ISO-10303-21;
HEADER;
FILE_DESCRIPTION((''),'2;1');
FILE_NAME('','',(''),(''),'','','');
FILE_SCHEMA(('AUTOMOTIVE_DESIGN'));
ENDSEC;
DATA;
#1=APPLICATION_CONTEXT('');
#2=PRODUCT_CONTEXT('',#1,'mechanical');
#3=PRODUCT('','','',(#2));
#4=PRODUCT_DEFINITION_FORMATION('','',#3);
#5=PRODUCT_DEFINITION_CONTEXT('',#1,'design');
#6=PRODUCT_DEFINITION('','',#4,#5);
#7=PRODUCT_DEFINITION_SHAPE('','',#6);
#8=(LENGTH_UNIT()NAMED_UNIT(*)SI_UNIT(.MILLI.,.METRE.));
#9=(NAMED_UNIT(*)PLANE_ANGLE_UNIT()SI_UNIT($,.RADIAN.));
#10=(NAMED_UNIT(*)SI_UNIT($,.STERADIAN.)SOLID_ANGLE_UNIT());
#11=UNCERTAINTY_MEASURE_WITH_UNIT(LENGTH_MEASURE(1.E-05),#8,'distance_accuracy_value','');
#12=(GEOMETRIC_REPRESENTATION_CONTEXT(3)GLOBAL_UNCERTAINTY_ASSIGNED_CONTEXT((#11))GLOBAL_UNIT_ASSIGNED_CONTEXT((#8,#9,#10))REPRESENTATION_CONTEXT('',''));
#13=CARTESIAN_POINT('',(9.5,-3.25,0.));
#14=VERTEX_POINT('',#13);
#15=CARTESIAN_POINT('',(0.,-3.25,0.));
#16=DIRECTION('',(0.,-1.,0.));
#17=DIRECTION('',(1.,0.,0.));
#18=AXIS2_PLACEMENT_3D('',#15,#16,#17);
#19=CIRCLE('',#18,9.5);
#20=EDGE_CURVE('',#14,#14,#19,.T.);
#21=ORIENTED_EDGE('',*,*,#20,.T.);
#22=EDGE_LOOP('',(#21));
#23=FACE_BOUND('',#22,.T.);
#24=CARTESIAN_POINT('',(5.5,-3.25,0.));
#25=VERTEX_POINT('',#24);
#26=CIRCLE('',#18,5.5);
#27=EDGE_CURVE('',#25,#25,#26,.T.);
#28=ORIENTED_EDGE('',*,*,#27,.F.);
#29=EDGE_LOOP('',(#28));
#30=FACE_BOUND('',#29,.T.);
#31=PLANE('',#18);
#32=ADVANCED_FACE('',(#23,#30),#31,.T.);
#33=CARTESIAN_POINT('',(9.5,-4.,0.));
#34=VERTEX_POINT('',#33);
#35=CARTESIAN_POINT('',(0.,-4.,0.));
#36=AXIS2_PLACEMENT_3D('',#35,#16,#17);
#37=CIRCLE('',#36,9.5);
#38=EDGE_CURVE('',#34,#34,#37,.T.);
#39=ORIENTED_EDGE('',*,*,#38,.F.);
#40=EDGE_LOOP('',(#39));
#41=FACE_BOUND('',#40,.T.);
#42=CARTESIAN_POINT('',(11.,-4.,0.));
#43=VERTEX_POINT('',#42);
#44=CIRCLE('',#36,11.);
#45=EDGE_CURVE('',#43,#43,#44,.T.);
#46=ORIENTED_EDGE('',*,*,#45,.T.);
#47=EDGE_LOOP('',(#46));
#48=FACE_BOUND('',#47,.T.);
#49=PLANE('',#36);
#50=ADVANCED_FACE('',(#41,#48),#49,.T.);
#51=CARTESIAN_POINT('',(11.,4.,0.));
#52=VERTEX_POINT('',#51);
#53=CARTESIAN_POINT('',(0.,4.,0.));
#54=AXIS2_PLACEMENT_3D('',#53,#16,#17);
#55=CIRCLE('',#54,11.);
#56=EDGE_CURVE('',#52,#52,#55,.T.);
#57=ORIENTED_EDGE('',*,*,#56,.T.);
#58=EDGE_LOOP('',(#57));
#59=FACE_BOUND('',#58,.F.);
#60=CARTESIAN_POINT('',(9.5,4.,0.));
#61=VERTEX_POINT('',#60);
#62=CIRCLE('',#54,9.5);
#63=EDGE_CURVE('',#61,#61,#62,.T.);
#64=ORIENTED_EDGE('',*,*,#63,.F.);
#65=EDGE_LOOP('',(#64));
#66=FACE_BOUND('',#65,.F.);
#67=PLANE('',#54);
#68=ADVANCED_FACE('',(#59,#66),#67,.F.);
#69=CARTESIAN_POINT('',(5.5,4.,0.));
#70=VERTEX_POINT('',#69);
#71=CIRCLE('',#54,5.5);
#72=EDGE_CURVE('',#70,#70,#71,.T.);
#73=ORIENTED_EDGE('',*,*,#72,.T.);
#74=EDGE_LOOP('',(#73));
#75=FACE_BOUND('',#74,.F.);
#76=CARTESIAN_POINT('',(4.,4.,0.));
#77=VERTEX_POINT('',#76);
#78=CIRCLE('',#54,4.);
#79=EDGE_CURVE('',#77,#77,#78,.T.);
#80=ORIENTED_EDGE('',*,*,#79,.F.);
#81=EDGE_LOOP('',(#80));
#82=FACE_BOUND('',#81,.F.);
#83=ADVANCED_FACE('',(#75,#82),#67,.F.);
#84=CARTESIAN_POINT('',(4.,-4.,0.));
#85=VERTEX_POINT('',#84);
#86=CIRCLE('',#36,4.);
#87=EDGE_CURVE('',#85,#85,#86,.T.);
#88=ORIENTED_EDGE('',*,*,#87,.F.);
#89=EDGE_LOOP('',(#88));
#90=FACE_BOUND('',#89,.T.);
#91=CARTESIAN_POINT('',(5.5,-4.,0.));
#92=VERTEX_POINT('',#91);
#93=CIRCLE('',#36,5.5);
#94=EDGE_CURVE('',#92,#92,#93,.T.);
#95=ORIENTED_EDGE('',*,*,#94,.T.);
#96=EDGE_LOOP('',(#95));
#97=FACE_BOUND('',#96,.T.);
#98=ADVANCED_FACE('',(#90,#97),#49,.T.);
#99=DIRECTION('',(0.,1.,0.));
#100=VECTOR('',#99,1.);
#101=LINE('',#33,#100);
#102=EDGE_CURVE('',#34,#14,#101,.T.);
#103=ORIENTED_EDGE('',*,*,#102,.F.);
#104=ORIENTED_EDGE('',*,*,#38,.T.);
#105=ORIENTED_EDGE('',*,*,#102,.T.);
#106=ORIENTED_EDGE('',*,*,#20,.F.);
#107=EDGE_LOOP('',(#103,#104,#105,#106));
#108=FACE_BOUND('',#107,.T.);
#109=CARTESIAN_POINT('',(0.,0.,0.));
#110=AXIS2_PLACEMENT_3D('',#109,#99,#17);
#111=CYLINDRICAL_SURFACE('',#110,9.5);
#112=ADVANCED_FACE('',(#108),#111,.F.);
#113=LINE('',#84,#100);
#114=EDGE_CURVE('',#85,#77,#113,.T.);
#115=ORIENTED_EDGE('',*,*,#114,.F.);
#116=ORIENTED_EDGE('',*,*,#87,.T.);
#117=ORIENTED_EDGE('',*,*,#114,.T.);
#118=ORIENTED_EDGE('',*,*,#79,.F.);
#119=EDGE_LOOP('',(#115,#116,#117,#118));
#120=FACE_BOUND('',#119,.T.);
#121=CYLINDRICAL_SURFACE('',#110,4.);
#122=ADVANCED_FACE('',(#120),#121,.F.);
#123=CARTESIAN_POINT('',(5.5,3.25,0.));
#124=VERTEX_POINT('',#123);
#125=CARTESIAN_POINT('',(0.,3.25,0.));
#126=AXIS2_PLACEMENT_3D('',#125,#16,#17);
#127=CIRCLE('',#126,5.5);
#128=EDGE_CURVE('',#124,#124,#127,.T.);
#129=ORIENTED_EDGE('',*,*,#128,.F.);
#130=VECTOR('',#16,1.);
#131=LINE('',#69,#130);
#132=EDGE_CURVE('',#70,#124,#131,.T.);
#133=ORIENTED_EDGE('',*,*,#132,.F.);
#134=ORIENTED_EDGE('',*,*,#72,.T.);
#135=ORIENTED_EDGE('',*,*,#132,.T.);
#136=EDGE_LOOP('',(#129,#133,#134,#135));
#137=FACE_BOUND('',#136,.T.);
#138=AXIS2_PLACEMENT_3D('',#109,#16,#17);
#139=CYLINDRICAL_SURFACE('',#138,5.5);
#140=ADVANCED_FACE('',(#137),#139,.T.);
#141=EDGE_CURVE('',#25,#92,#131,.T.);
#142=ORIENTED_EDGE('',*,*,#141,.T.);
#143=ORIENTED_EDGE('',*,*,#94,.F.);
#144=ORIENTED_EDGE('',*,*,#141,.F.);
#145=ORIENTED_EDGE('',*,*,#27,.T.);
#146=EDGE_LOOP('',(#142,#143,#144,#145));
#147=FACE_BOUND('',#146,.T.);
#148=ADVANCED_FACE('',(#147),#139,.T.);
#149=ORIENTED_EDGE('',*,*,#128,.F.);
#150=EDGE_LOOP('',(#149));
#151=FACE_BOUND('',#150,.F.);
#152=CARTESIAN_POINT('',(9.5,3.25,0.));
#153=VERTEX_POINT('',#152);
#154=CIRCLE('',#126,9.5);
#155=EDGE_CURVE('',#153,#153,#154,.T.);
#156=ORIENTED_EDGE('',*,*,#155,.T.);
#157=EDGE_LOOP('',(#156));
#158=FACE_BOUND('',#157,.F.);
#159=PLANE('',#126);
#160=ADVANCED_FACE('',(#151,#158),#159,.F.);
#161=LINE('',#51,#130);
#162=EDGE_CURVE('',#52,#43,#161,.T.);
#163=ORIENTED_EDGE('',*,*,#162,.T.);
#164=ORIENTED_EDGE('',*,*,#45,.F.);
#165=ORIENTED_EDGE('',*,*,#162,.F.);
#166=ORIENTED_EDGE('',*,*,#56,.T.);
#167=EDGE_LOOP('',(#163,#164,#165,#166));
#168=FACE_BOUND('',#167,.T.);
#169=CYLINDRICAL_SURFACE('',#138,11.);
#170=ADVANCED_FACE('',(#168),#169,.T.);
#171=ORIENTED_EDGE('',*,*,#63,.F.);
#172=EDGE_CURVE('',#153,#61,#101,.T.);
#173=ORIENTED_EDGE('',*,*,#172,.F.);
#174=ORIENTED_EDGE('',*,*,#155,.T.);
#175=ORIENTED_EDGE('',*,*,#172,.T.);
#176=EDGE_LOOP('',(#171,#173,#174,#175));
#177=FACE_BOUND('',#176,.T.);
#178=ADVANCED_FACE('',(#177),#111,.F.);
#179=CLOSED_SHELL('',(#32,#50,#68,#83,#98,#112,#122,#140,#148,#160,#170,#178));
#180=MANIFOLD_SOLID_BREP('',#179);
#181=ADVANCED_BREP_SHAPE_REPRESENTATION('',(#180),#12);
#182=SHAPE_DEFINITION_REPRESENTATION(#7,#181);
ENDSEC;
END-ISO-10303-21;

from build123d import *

# Parameters (mm, degrees)
F0_R     = 11
F0_R_2   = 9.5
F1_DEPTH = 4
F2_R     = 5.5
F2_R_2   = 4
F3_DEPTH = 4
F4_R     = 9.5
F4_R_2   = 5.5
F5_DEPTH = 3.25


with BuildPart() as f1:
    # F0 (on Front) → F1 (new body, symmetric)
    with BuildSketch(Plane.XZ):
        Circle(F0_R)
        Circle(F0_R_2, mode=Mode.SUBTRACT)
    extrude(amount=F1_DEPTH, both=True)



with BuildPart() as f3:
    # F2 (on Front) → F3 (new body, symmetric)
    with BuildSketch(Plane.XZ):
        Circle(F2_R)
        Circle(F2_R_2, mode=Mode.SUBTRACT)
    extrude(amount=F3_DEPTH, both=True)


with BuildPart() as f1_1:
    add(f1.part)

    add(f3.part)  # F5 merges F3
    # F4 (on Front) → F5 (join, symmetric)
    with BuildSketch(Plane.XZ):
        Circle(F4_R)
        Circle(F4_R_2, mode=Mode.SUBTRACT)
    extrude(amount=F5_DEPTH, both=True)


solid = f1_1.part
